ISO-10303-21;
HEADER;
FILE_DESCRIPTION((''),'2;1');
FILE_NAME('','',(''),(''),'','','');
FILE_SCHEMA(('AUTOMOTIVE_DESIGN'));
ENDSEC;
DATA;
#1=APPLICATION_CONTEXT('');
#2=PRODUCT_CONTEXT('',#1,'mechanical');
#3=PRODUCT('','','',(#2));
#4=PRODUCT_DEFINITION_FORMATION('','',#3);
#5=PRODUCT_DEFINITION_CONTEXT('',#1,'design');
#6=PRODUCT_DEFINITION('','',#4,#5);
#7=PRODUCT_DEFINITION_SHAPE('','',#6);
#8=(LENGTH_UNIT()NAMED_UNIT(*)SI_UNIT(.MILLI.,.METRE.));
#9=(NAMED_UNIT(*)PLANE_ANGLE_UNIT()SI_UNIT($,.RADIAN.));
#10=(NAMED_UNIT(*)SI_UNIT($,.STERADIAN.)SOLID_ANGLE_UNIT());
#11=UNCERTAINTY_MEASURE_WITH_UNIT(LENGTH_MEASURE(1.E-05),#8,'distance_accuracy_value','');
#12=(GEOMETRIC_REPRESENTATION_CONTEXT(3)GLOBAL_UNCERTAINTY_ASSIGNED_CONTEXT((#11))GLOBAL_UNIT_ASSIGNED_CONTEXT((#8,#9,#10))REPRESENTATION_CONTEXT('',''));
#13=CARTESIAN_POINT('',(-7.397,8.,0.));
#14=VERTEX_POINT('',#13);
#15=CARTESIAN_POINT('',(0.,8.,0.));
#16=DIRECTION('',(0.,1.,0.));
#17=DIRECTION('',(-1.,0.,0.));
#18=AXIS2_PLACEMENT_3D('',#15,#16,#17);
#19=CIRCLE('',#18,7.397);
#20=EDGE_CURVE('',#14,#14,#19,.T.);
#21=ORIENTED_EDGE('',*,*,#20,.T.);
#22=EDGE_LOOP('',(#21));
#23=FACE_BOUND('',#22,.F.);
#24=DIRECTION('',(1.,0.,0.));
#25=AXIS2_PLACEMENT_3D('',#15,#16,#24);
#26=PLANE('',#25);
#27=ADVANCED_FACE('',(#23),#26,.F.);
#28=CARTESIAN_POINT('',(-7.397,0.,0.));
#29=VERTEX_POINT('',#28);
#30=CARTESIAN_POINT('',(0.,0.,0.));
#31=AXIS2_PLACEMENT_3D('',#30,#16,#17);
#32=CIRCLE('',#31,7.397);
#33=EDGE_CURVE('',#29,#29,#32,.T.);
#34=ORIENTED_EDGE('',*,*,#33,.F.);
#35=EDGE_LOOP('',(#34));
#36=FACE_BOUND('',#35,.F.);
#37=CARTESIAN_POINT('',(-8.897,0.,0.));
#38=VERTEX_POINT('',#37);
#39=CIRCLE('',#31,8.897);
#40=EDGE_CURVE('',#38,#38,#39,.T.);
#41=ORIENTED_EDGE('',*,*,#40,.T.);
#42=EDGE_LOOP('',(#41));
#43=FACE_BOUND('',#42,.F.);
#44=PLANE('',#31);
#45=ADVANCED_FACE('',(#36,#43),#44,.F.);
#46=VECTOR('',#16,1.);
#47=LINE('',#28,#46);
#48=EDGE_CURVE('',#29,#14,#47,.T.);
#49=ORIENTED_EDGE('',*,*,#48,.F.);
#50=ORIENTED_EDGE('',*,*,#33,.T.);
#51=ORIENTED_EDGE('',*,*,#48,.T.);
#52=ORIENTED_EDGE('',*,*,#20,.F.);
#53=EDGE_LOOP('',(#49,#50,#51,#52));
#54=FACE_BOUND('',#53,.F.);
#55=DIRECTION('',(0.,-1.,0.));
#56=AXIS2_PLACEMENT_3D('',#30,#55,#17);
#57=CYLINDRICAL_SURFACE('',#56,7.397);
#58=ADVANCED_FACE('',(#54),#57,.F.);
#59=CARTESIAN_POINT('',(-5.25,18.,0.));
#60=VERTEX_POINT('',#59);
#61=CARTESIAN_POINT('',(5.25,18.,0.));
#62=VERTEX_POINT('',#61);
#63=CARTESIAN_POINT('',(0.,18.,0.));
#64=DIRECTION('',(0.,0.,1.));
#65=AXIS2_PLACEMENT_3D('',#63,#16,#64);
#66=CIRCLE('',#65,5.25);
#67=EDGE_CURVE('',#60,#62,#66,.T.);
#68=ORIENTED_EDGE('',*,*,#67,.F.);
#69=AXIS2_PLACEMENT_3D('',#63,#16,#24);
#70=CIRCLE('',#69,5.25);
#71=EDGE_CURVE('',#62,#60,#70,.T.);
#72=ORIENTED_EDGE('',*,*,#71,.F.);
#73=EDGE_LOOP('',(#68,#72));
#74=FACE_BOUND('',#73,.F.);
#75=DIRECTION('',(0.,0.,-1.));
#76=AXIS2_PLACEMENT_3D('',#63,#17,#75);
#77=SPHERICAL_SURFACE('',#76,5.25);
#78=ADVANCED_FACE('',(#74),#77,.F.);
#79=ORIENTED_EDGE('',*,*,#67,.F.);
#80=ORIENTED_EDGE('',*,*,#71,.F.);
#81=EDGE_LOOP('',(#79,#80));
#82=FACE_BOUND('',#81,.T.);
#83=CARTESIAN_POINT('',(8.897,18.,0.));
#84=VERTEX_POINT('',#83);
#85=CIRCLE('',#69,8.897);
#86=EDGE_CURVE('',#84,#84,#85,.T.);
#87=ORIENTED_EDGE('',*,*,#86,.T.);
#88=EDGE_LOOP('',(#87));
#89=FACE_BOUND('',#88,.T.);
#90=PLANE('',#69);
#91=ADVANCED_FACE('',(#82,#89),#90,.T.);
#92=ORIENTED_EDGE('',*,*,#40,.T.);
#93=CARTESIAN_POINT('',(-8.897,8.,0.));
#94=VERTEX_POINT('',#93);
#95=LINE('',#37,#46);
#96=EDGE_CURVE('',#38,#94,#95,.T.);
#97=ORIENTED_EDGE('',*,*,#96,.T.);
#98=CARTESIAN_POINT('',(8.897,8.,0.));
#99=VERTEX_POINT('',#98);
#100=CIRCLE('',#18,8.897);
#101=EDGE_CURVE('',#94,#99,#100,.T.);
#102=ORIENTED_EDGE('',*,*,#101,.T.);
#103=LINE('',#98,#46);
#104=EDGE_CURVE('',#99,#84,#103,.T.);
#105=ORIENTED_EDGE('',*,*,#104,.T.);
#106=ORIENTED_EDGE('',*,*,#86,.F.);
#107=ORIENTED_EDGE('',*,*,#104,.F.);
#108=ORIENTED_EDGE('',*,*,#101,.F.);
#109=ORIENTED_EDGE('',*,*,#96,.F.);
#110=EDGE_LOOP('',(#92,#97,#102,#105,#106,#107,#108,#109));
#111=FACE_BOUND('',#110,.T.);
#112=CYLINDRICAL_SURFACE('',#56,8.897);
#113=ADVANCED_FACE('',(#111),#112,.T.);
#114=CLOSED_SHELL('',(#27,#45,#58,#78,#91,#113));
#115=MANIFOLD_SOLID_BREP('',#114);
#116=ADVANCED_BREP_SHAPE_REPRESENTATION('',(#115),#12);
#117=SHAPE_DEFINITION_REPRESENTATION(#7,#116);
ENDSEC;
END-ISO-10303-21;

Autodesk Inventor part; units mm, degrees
ref_plane "YZ Plane" through (0, 0, 0) normal (1, 0, 0) x (0, 1, 0)
ref_plane "XZ Plane" through (0, 0, 0) normal (0, 1, 0) x (-1, 0, 0)
ref_plane "XY Plane" through (0, 0, 0) normal (0, 0, 1) x (1, 0, 0)
sketch "Sketch1" plane through (0, 0, 0) normal (0, 1, 0) x (-1, 0, 0)
  point P0 (0, 0)
sketch "Sketch2" plane through (0, 0, 0) normal (0, 1, 0) x (-1, 0, 0)
  circle A0 centre (0, 0) radius 8.897
  circle A1 centre (0, 0) radius 7.397
  dimension "d0" = 17.794
  dimension "d1" = 14.794
extrude "Extrusion1" add sketch "Sketch2" along normal blind 8
sketch "Sketch3" plane through (0, 8, 0) normal (0, 1, 0) x (1, 0, 0)
  circle A0 centre (0, 0) radius 8.897
extrude "Extrusion2" add sketch "Sketch3" along normal blind 10
sketch "Sketch4" plane through (0, 18, 0) normal (0, 1, 0) x (1, 0, 0)
  arc A0 (5.25, 0) -> (-5.25, 0) centre (0, 0) ccw
  line L0 (-5.25, 0) -> (5.25, 0)
  dimension "d6" = 10.5
revolve "Revolution1" cut sketch "Sketch4" angle 360 about axis through (-5.25, 18, 0) along (-1, 0, 0)
sketch "Sketch5" plane through (0, 18, 0) normal (0, 1, 0) x (1, 0, 0)
  point P0 (0, 0)
